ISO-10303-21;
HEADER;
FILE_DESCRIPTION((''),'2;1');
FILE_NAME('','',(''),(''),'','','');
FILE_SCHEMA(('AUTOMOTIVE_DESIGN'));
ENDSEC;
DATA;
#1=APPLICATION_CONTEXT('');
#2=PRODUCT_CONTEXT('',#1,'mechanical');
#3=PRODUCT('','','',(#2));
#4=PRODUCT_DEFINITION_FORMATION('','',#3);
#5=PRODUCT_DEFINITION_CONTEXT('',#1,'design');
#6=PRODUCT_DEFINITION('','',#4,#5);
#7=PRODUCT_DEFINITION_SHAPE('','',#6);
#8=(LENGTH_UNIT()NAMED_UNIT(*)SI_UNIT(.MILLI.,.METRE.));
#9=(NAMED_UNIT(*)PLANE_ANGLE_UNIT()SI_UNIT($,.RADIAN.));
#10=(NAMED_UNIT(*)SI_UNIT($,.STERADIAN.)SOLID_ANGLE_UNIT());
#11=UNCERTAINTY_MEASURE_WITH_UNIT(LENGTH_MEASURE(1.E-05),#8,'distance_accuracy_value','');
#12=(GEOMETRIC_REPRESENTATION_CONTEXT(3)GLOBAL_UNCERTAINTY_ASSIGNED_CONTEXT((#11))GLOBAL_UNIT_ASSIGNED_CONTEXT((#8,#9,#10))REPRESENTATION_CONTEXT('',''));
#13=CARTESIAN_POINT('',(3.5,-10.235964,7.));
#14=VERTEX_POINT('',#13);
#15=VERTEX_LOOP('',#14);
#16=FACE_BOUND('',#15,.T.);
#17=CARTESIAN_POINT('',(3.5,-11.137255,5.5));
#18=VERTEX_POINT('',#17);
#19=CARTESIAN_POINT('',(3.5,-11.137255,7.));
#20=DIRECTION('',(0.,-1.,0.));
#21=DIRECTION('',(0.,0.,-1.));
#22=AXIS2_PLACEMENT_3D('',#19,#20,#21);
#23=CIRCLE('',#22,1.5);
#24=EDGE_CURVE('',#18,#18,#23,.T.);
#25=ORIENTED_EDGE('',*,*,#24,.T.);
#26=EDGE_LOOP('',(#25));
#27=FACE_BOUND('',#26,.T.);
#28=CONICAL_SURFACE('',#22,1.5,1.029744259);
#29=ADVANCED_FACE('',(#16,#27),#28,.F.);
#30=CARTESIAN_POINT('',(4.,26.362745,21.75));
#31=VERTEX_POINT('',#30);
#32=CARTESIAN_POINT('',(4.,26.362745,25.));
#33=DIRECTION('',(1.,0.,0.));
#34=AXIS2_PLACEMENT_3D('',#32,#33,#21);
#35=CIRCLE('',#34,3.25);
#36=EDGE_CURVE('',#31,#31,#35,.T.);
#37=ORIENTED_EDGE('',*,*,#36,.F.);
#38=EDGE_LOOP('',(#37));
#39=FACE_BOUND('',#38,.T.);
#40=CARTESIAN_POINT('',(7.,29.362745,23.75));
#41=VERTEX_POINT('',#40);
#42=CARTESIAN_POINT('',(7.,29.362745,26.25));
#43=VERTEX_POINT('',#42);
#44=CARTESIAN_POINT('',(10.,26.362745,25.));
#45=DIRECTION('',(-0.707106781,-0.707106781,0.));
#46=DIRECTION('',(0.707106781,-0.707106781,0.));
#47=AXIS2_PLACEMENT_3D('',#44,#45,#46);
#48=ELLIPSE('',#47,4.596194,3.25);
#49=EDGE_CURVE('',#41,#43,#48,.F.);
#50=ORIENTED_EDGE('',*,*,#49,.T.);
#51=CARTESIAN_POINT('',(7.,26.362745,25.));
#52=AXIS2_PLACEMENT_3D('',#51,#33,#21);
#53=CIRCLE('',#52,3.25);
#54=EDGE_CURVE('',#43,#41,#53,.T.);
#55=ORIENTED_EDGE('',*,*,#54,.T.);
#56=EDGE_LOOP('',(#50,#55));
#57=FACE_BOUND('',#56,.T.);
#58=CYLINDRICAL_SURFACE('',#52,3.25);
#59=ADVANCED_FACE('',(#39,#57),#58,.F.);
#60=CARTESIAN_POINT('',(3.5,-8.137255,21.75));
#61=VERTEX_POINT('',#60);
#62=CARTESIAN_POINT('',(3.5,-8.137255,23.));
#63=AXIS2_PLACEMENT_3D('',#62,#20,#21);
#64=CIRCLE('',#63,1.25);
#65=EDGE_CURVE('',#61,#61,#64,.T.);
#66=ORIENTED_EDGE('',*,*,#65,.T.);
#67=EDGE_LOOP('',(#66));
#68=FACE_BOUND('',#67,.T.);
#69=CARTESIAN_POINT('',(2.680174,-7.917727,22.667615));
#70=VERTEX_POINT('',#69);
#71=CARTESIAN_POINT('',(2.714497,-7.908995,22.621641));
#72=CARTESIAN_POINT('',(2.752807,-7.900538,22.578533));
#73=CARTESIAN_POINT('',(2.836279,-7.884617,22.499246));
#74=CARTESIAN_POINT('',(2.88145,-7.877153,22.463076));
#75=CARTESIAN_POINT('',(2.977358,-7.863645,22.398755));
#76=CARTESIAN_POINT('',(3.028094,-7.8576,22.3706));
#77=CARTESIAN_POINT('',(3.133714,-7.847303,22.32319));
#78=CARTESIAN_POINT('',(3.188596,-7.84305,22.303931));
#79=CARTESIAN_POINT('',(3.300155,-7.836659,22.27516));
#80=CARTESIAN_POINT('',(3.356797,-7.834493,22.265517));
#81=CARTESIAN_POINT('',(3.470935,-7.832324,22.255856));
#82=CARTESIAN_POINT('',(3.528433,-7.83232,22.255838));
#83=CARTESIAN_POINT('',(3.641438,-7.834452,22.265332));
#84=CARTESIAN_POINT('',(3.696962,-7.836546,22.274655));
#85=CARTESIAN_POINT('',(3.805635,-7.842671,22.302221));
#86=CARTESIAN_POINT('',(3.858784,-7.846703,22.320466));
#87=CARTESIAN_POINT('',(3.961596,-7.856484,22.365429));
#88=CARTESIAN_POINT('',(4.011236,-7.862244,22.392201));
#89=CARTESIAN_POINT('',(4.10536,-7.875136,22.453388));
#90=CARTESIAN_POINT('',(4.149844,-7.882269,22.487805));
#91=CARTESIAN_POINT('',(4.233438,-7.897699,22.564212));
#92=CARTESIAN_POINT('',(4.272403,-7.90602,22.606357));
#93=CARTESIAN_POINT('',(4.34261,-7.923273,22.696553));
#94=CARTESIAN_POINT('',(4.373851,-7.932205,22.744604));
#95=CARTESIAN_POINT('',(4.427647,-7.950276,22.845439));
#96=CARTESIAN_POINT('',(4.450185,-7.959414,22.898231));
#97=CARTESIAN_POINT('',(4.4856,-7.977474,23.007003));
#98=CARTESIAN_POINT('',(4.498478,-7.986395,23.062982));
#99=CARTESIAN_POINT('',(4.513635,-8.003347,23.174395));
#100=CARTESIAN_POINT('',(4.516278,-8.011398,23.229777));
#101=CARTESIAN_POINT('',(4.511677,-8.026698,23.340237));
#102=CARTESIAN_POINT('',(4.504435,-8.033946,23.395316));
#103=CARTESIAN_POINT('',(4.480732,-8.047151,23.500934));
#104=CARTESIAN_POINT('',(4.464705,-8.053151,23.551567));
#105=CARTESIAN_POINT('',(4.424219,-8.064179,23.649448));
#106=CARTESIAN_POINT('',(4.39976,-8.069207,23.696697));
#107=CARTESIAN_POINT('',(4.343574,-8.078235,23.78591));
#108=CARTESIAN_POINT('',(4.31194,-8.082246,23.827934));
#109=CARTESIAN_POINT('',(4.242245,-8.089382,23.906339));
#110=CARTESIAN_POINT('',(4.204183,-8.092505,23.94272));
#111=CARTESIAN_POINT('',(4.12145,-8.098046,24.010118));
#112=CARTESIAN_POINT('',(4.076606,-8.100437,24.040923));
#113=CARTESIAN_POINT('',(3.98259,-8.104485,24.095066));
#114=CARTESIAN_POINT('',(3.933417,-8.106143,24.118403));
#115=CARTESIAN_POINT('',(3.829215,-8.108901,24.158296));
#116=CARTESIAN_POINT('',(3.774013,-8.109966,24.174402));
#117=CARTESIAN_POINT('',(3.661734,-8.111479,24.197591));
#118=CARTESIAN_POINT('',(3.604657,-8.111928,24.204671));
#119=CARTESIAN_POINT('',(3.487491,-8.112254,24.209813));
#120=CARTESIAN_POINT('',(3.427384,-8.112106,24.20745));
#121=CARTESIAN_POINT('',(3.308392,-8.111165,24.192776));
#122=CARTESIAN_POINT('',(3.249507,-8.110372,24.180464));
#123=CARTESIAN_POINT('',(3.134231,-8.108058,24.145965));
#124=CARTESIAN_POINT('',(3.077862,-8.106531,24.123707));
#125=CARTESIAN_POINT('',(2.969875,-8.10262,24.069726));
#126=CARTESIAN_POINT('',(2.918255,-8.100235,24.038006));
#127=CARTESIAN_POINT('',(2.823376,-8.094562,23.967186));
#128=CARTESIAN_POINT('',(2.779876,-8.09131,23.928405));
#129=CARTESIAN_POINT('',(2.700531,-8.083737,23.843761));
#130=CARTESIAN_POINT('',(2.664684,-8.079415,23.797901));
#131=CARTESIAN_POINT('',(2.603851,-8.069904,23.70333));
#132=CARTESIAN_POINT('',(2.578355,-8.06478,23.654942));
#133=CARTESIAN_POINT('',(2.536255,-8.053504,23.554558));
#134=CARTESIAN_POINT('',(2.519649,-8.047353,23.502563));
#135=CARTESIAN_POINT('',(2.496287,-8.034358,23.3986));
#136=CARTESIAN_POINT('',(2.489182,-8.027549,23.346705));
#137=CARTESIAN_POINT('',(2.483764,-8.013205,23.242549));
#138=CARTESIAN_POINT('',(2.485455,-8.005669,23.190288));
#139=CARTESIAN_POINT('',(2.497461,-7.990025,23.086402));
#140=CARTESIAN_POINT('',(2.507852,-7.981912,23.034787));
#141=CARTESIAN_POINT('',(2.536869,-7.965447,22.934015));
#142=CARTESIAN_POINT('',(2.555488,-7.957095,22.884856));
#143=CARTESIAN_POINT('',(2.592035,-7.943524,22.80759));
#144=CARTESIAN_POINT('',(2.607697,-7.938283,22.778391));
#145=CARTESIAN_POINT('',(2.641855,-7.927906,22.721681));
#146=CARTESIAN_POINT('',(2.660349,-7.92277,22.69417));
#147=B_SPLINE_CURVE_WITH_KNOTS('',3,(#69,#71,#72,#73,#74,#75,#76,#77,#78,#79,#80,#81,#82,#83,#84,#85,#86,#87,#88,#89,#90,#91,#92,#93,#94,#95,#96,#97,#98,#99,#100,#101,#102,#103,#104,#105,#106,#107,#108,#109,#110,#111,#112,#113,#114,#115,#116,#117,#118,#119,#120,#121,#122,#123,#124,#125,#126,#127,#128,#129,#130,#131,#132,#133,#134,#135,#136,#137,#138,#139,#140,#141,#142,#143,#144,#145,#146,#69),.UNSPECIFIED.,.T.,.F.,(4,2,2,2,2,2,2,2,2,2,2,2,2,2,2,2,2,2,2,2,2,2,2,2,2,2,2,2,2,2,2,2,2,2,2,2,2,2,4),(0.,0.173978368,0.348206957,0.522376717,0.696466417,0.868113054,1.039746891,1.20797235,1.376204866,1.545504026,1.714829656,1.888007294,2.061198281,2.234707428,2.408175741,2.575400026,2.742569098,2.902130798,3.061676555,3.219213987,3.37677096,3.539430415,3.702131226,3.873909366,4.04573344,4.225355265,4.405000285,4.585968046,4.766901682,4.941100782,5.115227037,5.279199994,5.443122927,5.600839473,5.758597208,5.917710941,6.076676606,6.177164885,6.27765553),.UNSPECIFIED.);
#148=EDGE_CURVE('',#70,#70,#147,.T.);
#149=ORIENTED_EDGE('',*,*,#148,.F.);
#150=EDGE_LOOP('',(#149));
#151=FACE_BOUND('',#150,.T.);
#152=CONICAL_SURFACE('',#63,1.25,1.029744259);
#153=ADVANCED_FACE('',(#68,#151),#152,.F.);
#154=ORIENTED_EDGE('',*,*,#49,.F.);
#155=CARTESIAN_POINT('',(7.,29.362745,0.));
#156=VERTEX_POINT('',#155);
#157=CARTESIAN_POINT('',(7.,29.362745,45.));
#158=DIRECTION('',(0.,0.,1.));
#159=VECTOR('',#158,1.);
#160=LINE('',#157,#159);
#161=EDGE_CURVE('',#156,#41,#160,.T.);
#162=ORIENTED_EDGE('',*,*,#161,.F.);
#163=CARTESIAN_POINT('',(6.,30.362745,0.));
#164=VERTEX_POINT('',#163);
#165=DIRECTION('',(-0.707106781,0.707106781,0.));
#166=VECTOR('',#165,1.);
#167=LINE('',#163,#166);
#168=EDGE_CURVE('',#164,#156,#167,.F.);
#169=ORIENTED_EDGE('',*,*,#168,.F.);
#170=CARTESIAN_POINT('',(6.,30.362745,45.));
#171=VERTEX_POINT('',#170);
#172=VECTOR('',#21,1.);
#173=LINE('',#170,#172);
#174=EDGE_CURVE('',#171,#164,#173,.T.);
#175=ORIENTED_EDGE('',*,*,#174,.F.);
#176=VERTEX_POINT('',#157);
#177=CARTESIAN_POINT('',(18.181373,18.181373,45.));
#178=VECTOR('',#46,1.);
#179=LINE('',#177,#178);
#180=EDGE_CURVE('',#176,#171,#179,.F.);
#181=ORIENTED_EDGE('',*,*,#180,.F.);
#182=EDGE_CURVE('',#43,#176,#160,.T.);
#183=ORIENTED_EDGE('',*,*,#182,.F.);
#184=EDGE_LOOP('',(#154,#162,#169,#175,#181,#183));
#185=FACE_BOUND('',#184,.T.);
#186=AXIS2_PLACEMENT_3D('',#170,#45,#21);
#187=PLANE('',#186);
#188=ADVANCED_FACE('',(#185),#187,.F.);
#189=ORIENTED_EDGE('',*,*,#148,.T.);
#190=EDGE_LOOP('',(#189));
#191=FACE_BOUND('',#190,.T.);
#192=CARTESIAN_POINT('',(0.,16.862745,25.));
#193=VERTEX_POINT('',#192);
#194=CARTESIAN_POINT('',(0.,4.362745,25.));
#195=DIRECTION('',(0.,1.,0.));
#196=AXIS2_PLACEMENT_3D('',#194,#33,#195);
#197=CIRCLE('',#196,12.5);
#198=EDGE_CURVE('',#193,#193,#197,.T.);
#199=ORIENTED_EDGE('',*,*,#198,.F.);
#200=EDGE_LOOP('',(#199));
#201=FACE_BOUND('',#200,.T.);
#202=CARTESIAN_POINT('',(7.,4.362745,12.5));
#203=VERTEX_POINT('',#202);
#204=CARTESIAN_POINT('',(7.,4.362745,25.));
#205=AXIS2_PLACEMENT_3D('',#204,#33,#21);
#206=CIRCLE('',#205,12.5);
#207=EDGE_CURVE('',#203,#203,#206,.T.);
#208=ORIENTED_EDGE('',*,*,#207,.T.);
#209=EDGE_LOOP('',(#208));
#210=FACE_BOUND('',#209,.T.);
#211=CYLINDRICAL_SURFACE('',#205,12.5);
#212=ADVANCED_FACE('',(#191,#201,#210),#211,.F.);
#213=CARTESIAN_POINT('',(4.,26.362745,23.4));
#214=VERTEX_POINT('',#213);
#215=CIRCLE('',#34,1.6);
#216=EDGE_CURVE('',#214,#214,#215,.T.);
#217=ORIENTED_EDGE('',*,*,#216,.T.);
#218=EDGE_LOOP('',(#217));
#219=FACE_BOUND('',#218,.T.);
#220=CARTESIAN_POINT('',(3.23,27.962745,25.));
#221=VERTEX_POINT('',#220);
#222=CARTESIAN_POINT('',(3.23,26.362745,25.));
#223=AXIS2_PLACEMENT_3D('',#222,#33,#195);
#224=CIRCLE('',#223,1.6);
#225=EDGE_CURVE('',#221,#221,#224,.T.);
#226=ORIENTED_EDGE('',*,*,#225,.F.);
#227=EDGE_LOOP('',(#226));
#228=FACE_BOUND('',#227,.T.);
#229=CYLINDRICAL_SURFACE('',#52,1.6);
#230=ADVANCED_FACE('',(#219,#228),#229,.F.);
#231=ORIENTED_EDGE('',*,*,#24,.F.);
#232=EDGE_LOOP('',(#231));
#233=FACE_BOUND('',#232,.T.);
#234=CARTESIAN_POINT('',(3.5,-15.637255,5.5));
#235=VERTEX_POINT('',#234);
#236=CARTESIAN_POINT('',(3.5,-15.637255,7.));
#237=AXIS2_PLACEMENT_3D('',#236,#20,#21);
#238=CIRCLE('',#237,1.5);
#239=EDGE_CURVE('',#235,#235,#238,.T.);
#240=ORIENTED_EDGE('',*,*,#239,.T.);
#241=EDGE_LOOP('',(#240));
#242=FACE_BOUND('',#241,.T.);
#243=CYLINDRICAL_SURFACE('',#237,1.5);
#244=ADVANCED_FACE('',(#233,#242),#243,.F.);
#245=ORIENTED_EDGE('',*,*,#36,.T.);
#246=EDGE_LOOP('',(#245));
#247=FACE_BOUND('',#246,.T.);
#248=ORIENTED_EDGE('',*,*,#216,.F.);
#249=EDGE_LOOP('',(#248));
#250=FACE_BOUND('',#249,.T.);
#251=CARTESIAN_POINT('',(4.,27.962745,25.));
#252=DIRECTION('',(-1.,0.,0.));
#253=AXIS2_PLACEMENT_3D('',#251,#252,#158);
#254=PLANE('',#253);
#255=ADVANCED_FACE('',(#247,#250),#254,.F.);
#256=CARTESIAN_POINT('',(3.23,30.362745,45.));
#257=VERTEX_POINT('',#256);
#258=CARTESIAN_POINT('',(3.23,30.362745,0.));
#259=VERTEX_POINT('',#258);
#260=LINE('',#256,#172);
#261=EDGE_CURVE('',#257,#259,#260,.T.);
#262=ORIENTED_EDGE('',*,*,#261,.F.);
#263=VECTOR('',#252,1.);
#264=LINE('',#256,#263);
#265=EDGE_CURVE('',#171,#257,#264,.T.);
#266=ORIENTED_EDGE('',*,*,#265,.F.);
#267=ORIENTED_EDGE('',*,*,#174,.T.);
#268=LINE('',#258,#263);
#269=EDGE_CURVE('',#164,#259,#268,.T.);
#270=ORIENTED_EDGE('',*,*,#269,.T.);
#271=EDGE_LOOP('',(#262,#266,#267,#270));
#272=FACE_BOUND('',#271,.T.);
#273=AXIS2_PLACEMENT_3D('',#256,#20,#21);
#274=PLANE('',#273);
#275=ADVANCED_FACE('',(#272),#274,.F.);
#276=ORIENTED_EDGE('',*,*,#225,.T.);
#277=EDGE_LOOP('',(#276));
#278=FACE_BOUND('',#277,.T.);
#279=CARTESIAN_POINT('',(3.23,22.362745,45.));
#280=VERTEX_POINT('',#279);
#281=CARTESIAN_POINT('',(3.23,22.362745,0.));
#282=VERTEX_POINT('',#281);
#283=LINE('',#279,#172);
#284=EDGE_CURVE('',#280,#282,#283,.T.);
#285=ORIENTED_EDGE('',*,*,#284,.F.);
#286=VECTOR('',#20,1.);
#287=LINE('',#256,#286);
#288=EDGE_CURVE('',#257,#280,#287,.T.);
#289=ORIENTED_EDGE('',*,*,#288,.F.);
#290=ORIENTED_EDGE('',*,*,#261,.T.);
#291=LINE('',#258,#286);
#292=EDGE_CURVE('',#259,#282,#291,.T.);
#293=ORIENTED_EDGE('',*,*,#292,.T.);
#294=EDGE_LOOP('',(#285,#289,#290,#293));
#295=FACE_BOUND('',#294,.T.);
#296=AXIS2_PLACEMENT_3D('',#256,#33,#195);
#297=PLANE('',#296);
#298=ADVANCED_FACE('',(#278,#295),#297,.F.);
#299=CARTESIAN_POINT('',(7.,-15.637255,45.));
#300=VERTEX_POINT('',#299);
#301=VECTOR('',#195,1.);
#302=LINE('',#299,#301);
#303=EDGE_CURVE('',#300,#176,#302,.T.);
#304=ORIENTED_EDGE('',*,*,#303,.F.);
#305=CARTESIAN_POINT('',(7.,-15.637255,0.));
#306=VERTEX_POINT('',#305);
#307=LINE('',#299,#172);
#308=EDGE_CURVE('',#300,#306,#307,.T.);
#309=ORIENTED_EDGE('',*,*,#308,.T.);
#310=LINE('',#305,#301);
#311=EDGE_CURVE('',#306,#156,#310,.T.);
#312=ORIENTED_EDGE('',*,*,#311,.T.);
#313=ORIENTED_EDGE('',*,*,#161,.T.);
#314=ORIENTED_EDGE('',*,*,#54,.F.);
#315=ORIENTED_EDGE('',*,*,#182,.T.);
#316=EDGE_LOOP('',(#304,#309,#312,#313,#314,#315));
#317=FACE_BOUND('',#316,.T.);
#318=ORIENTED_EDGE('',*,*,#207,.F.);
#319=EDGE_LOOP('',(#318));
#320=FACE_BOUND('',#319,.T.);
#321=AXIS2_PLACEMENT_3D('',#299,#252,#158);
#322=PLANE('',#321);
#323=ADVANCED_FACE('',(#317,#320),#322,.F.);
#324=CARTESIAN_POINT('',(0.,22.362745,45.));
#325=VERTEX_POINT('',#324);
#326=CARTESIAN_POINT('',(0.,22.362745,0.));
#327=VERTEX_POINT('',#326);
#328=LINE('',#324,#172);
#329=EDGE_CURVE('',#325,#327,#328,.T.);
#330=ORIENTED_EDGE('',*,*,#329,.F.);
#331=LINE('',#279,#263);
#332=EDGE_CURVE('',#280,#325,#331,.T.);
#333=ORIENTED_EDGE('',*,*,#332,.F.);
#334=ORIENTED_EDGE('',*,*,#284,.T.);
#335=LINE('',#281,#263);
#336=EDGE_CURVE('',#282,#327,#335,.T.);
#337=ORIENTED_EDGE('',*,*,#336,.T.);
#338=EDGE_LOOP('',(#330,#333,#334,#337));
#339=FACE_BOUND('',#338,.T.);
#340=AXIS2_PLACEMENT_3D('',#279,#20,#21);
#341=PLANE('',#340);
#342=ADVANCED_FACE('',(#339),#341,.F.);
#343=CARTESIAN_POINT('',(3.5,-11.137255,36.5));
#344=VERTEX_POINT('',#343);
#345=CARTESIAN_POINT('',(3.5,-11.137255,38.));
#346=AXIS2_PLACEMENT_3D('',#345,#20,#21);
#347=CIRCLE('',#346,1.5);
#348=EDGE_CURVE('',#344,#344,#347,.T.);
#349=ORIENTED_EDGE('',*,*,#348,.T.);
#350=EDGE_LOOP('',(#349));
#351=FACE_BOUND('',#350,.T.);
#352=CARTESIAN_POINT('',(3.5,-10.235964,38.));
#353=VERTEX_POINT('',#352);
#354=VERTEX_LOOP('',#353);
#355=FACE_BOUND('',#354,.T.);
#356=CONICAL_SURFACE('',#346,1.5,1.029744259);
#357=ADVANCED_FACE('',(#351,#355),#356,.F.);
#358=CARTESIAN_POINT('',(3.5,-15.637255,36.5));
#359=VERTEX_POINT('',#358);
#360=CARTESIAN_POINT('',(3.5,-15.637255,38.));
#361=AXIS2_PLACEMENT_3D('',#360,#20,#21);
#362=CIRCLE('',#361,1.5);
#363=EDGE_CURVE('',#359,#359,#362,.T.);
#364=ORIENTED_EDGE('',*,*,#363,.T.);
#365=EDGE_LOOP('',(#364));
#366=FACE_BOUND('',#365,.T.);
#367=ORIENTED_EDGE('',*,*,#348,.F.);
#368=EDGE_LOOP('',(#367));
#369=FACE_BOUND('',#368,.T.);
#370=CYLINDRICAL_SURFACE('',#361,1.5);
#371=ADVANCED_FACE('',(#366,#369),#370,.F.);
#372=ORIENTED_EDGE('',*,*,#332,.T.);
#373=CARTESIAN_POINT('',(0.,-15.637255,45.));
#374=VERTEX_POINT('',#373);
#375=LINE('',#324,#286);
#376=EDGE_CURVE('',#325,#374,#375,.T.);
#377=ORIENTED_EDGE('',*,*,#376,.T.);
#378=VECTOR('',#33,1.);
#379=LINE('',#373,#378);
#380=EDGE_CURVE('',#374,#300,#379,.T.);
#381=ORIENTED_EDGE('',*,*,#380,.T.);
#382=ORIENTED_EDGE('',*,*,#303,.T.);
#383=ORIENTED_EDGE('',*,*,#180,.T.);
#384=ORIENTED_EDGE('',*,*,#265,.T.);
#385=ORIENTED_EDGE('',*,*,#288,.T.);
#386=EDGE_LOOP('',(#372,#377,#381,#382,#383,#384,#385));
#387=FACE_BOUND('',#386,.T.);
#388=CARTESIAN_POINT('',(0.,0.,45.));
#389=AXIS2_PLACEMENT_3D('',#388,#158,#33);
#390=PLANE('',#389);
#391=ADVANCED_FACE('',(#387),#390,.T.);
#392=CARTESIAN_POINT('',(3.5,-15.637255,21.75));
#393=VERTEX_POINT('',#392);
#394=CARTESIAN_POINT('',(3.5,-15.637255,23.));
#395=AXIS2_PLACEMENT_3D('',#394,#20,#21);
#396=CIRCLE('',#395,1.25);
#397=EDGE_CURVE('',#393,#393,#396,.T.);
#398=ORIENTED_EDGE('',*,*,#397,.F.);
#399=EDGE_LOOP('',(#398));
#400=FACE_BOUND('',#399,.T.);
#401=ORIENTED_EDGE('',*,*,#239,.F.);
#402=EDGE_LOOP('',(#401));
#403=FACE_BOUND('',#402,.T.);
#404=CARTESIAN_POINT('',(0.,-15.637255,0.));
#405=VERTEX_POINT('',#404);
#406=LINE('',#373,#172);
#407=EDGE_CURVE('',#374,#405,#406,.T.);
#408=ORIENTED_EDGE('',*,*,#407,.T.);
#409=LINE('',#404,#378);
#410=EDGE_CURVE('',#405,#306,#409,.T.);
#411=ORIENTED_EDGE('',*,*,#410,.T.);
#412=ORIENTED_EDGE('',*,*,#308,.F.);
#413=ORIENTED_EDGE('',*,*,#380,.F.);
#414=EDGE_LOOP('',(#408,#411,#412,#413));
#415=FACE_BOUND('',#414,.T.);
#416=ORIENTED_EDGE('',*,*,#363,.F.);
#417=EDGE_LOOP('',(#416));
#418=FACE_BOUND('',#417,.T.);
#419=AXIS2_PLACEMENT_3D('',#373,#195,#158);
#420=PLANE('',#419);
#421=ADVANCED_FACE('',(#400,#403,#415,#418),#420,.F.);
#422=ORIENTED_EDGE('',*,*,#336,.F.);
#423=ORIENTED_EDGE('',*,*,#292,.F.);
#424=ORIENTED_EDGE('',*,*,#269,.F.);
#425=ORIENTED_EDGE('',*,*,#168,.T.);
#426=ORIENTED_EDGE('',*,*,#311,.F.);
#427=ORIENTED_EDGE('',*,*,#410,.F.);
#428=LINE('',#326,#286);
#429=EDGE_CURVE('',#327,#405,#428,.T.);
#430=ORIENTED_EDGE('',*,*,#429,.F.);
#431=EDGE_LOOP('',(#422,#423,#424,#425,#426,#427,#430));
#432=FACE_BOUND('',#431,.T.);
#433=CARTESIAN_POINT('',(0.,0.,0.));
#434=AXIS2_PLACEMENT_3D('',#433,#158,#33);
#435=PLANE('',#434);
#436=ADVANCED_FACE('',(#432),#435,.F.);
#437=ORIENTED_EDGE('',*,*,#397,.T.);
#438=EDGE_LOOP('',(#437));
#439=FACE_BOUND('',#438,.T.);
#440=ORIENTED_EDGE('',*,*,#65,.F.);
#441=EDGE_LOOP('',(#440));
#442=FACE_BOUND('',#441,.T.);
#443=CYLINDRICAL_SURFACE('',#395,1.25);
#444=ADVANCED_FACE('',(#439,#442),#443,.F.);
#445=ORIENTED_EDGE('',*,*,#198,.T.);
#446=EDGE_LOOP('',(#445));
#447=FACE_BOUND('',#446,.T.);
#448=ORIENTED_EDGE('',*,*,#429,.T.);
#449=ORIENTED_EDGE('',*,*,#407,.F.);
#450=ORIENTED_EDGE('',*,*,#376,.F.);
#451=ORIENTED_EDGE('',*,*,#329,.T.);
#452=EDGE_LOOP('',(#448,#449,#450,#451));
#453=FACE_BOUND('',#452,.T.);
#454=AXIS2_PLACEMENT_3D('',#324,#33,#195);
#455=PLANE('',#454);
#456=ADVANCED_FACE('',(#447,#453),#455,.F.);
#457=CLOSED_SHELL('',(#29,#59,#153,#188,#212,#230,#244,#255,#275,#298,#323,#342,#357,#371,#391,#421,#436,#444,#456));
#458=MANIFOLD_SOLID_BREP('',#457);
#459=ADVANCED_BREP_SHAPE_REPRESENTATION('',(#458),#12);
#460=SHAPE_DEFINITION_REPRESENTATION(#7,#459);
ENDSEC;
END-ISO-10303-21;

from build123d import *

# Parameters (mm, degrees)
BOSS_EXTRUDE1_DEPTH            = 45
CBORE_FOR_M3_SHCS1_D           = 3.2
CBORE_FOR_M3_SHCS1_CBORE_D     = 6.5
CBORE_FOR_M3_SHCS1_CBORE_DEPTH = 3
F_25_0_25_DIAMETER_HOLE1_D     = 25
CHAMFER1_SIZE                  = 1
F_3_0MM_DOWEL_HOLE1_D          = 3
F_3_0MM_DOWEL_HOLE1_DEPTH      = 4.5
F_3_0MM_DOWEL_HOLE1_TIP        = 0.901290929
M3X0_5_TAPPED_HOLE1_D          = 2.5
M3X0_5_TAPPED_HOLE1_DEPTH      = 7.5
M3X0_5_TAPPED_HOLE1_TIP        = 0.751075774


with BuildPart() as part:
    # Sketch1 → Boss-Extrude1 (new body)
    with BuildSketch(Plane.XY):
        Polygon((3.23, 30.362745098), (3.23, 22.362745098), (0, 22.362745098), (0, -15.637254902), (7, -15.637254902), (7, 30.362745098), align=None)
    extrude(amount=BOSS_EXTRUDE1_DEPTH)

    # CBORE for M3 SHCS1 (through all)
    with Locations(Plane(origin=(7, 0, 0), x_dir=(0, 0, -1), z_dir=(1, 0, 0))):
        with Locations((-25, 26.362745098)):
            CounterBoreHole(CBORE_FOR_M3_SHCS1_D / 2, CBORE_FOR_M3_SHCS1_CBORE_D / 2, CBORE_FOR_M3_SHCS1_CBORE_DEPTH)

    # Ø25.0 (25) Diameter Hole1 (through all)
    with Locations(Plane(origin=(7, 0, 0), x_dir=(0, 0, -1), z_dir=(1, 0, 0))):
        with Locations((-25, 4.362745098)):
            Hole(F_25_0_25_DIAMETER_HOLE1_D / 2)

    # Chamfer1
    # the kernel refuses this chamfer: 1 mm, written as the material it takes off along each edge
    with BuildSketch(Plane(origin=(7, 30.362745098, -2.571682988), x_dir=(-0.9996219169112968, 0.027495876610585623, 0), z_dir=(0, 0, 1))) as chamfer1_piece_1:
        Polygon((CHAMFER1_SIZE * 0.999621916911, CHAMFER1_SIZE * 0.0274958766106), (-CHAMFER1_SIZE * 0.0274958766106, CHAMFER1_SIZE * 0.999621916911), (0, 0), align=None)
    extrude(amount=50.143365976, mode=Mode.SUBTRACT)

    # Ø3.0mm Dowel Hole1
    with Locations(Plane(origin=(0, -15.637254902, 0), x_dir=(-1, 0, 0), z_dir=(0, -1, 0))):
        with Locations((-3.5, -38), (-3.5, -7)):
            Hole(F_3_0MM_DOWEL_HOLE1_D / 2, depth=F_3_0MM_DOWEL_HOLE1_DEPTH)
            with Locations((0, 0, -(F_3_0MM_DOWEL_HOLE1_DEPTH + F_3_0MM_DOWEL_HOLE1_TIP / 2))):  # 118° drill point
                Cone(0, F_3_0MM_DOWEL_HOLE1_D / 2, F_3_0MM_DOWEL_HOLE1_TIP, mode=Mode.SUBTRACT)

    # M3x0.5 Tapped Hole1
    with Locations(Plane(origin=(0, -15.637254902, 0), x_dir=(-1, 0, 0), z_dir=(0, -1, 0))):
        with Locations((-3.5, -23)):
            Hole(M3X0_5_TAPPED_HOLE1_D / 2, depth=M3X0_5_TAPPED_HOLE1_DEPTH)
            with Locations((0, 0, -(M3X0_5_TAPPED_HOLE1_DEPTH + M3X0_5_TAPPED_HOLE1_TIP / 2))):  # 118° drill point
                Cone(0, M3X0_5_TAPPED_HOLE1_D / 2, M3X0_5_TAPPED_HOLE1_TIP, mode=Mode.SUBTRACT)


solid = part.part
